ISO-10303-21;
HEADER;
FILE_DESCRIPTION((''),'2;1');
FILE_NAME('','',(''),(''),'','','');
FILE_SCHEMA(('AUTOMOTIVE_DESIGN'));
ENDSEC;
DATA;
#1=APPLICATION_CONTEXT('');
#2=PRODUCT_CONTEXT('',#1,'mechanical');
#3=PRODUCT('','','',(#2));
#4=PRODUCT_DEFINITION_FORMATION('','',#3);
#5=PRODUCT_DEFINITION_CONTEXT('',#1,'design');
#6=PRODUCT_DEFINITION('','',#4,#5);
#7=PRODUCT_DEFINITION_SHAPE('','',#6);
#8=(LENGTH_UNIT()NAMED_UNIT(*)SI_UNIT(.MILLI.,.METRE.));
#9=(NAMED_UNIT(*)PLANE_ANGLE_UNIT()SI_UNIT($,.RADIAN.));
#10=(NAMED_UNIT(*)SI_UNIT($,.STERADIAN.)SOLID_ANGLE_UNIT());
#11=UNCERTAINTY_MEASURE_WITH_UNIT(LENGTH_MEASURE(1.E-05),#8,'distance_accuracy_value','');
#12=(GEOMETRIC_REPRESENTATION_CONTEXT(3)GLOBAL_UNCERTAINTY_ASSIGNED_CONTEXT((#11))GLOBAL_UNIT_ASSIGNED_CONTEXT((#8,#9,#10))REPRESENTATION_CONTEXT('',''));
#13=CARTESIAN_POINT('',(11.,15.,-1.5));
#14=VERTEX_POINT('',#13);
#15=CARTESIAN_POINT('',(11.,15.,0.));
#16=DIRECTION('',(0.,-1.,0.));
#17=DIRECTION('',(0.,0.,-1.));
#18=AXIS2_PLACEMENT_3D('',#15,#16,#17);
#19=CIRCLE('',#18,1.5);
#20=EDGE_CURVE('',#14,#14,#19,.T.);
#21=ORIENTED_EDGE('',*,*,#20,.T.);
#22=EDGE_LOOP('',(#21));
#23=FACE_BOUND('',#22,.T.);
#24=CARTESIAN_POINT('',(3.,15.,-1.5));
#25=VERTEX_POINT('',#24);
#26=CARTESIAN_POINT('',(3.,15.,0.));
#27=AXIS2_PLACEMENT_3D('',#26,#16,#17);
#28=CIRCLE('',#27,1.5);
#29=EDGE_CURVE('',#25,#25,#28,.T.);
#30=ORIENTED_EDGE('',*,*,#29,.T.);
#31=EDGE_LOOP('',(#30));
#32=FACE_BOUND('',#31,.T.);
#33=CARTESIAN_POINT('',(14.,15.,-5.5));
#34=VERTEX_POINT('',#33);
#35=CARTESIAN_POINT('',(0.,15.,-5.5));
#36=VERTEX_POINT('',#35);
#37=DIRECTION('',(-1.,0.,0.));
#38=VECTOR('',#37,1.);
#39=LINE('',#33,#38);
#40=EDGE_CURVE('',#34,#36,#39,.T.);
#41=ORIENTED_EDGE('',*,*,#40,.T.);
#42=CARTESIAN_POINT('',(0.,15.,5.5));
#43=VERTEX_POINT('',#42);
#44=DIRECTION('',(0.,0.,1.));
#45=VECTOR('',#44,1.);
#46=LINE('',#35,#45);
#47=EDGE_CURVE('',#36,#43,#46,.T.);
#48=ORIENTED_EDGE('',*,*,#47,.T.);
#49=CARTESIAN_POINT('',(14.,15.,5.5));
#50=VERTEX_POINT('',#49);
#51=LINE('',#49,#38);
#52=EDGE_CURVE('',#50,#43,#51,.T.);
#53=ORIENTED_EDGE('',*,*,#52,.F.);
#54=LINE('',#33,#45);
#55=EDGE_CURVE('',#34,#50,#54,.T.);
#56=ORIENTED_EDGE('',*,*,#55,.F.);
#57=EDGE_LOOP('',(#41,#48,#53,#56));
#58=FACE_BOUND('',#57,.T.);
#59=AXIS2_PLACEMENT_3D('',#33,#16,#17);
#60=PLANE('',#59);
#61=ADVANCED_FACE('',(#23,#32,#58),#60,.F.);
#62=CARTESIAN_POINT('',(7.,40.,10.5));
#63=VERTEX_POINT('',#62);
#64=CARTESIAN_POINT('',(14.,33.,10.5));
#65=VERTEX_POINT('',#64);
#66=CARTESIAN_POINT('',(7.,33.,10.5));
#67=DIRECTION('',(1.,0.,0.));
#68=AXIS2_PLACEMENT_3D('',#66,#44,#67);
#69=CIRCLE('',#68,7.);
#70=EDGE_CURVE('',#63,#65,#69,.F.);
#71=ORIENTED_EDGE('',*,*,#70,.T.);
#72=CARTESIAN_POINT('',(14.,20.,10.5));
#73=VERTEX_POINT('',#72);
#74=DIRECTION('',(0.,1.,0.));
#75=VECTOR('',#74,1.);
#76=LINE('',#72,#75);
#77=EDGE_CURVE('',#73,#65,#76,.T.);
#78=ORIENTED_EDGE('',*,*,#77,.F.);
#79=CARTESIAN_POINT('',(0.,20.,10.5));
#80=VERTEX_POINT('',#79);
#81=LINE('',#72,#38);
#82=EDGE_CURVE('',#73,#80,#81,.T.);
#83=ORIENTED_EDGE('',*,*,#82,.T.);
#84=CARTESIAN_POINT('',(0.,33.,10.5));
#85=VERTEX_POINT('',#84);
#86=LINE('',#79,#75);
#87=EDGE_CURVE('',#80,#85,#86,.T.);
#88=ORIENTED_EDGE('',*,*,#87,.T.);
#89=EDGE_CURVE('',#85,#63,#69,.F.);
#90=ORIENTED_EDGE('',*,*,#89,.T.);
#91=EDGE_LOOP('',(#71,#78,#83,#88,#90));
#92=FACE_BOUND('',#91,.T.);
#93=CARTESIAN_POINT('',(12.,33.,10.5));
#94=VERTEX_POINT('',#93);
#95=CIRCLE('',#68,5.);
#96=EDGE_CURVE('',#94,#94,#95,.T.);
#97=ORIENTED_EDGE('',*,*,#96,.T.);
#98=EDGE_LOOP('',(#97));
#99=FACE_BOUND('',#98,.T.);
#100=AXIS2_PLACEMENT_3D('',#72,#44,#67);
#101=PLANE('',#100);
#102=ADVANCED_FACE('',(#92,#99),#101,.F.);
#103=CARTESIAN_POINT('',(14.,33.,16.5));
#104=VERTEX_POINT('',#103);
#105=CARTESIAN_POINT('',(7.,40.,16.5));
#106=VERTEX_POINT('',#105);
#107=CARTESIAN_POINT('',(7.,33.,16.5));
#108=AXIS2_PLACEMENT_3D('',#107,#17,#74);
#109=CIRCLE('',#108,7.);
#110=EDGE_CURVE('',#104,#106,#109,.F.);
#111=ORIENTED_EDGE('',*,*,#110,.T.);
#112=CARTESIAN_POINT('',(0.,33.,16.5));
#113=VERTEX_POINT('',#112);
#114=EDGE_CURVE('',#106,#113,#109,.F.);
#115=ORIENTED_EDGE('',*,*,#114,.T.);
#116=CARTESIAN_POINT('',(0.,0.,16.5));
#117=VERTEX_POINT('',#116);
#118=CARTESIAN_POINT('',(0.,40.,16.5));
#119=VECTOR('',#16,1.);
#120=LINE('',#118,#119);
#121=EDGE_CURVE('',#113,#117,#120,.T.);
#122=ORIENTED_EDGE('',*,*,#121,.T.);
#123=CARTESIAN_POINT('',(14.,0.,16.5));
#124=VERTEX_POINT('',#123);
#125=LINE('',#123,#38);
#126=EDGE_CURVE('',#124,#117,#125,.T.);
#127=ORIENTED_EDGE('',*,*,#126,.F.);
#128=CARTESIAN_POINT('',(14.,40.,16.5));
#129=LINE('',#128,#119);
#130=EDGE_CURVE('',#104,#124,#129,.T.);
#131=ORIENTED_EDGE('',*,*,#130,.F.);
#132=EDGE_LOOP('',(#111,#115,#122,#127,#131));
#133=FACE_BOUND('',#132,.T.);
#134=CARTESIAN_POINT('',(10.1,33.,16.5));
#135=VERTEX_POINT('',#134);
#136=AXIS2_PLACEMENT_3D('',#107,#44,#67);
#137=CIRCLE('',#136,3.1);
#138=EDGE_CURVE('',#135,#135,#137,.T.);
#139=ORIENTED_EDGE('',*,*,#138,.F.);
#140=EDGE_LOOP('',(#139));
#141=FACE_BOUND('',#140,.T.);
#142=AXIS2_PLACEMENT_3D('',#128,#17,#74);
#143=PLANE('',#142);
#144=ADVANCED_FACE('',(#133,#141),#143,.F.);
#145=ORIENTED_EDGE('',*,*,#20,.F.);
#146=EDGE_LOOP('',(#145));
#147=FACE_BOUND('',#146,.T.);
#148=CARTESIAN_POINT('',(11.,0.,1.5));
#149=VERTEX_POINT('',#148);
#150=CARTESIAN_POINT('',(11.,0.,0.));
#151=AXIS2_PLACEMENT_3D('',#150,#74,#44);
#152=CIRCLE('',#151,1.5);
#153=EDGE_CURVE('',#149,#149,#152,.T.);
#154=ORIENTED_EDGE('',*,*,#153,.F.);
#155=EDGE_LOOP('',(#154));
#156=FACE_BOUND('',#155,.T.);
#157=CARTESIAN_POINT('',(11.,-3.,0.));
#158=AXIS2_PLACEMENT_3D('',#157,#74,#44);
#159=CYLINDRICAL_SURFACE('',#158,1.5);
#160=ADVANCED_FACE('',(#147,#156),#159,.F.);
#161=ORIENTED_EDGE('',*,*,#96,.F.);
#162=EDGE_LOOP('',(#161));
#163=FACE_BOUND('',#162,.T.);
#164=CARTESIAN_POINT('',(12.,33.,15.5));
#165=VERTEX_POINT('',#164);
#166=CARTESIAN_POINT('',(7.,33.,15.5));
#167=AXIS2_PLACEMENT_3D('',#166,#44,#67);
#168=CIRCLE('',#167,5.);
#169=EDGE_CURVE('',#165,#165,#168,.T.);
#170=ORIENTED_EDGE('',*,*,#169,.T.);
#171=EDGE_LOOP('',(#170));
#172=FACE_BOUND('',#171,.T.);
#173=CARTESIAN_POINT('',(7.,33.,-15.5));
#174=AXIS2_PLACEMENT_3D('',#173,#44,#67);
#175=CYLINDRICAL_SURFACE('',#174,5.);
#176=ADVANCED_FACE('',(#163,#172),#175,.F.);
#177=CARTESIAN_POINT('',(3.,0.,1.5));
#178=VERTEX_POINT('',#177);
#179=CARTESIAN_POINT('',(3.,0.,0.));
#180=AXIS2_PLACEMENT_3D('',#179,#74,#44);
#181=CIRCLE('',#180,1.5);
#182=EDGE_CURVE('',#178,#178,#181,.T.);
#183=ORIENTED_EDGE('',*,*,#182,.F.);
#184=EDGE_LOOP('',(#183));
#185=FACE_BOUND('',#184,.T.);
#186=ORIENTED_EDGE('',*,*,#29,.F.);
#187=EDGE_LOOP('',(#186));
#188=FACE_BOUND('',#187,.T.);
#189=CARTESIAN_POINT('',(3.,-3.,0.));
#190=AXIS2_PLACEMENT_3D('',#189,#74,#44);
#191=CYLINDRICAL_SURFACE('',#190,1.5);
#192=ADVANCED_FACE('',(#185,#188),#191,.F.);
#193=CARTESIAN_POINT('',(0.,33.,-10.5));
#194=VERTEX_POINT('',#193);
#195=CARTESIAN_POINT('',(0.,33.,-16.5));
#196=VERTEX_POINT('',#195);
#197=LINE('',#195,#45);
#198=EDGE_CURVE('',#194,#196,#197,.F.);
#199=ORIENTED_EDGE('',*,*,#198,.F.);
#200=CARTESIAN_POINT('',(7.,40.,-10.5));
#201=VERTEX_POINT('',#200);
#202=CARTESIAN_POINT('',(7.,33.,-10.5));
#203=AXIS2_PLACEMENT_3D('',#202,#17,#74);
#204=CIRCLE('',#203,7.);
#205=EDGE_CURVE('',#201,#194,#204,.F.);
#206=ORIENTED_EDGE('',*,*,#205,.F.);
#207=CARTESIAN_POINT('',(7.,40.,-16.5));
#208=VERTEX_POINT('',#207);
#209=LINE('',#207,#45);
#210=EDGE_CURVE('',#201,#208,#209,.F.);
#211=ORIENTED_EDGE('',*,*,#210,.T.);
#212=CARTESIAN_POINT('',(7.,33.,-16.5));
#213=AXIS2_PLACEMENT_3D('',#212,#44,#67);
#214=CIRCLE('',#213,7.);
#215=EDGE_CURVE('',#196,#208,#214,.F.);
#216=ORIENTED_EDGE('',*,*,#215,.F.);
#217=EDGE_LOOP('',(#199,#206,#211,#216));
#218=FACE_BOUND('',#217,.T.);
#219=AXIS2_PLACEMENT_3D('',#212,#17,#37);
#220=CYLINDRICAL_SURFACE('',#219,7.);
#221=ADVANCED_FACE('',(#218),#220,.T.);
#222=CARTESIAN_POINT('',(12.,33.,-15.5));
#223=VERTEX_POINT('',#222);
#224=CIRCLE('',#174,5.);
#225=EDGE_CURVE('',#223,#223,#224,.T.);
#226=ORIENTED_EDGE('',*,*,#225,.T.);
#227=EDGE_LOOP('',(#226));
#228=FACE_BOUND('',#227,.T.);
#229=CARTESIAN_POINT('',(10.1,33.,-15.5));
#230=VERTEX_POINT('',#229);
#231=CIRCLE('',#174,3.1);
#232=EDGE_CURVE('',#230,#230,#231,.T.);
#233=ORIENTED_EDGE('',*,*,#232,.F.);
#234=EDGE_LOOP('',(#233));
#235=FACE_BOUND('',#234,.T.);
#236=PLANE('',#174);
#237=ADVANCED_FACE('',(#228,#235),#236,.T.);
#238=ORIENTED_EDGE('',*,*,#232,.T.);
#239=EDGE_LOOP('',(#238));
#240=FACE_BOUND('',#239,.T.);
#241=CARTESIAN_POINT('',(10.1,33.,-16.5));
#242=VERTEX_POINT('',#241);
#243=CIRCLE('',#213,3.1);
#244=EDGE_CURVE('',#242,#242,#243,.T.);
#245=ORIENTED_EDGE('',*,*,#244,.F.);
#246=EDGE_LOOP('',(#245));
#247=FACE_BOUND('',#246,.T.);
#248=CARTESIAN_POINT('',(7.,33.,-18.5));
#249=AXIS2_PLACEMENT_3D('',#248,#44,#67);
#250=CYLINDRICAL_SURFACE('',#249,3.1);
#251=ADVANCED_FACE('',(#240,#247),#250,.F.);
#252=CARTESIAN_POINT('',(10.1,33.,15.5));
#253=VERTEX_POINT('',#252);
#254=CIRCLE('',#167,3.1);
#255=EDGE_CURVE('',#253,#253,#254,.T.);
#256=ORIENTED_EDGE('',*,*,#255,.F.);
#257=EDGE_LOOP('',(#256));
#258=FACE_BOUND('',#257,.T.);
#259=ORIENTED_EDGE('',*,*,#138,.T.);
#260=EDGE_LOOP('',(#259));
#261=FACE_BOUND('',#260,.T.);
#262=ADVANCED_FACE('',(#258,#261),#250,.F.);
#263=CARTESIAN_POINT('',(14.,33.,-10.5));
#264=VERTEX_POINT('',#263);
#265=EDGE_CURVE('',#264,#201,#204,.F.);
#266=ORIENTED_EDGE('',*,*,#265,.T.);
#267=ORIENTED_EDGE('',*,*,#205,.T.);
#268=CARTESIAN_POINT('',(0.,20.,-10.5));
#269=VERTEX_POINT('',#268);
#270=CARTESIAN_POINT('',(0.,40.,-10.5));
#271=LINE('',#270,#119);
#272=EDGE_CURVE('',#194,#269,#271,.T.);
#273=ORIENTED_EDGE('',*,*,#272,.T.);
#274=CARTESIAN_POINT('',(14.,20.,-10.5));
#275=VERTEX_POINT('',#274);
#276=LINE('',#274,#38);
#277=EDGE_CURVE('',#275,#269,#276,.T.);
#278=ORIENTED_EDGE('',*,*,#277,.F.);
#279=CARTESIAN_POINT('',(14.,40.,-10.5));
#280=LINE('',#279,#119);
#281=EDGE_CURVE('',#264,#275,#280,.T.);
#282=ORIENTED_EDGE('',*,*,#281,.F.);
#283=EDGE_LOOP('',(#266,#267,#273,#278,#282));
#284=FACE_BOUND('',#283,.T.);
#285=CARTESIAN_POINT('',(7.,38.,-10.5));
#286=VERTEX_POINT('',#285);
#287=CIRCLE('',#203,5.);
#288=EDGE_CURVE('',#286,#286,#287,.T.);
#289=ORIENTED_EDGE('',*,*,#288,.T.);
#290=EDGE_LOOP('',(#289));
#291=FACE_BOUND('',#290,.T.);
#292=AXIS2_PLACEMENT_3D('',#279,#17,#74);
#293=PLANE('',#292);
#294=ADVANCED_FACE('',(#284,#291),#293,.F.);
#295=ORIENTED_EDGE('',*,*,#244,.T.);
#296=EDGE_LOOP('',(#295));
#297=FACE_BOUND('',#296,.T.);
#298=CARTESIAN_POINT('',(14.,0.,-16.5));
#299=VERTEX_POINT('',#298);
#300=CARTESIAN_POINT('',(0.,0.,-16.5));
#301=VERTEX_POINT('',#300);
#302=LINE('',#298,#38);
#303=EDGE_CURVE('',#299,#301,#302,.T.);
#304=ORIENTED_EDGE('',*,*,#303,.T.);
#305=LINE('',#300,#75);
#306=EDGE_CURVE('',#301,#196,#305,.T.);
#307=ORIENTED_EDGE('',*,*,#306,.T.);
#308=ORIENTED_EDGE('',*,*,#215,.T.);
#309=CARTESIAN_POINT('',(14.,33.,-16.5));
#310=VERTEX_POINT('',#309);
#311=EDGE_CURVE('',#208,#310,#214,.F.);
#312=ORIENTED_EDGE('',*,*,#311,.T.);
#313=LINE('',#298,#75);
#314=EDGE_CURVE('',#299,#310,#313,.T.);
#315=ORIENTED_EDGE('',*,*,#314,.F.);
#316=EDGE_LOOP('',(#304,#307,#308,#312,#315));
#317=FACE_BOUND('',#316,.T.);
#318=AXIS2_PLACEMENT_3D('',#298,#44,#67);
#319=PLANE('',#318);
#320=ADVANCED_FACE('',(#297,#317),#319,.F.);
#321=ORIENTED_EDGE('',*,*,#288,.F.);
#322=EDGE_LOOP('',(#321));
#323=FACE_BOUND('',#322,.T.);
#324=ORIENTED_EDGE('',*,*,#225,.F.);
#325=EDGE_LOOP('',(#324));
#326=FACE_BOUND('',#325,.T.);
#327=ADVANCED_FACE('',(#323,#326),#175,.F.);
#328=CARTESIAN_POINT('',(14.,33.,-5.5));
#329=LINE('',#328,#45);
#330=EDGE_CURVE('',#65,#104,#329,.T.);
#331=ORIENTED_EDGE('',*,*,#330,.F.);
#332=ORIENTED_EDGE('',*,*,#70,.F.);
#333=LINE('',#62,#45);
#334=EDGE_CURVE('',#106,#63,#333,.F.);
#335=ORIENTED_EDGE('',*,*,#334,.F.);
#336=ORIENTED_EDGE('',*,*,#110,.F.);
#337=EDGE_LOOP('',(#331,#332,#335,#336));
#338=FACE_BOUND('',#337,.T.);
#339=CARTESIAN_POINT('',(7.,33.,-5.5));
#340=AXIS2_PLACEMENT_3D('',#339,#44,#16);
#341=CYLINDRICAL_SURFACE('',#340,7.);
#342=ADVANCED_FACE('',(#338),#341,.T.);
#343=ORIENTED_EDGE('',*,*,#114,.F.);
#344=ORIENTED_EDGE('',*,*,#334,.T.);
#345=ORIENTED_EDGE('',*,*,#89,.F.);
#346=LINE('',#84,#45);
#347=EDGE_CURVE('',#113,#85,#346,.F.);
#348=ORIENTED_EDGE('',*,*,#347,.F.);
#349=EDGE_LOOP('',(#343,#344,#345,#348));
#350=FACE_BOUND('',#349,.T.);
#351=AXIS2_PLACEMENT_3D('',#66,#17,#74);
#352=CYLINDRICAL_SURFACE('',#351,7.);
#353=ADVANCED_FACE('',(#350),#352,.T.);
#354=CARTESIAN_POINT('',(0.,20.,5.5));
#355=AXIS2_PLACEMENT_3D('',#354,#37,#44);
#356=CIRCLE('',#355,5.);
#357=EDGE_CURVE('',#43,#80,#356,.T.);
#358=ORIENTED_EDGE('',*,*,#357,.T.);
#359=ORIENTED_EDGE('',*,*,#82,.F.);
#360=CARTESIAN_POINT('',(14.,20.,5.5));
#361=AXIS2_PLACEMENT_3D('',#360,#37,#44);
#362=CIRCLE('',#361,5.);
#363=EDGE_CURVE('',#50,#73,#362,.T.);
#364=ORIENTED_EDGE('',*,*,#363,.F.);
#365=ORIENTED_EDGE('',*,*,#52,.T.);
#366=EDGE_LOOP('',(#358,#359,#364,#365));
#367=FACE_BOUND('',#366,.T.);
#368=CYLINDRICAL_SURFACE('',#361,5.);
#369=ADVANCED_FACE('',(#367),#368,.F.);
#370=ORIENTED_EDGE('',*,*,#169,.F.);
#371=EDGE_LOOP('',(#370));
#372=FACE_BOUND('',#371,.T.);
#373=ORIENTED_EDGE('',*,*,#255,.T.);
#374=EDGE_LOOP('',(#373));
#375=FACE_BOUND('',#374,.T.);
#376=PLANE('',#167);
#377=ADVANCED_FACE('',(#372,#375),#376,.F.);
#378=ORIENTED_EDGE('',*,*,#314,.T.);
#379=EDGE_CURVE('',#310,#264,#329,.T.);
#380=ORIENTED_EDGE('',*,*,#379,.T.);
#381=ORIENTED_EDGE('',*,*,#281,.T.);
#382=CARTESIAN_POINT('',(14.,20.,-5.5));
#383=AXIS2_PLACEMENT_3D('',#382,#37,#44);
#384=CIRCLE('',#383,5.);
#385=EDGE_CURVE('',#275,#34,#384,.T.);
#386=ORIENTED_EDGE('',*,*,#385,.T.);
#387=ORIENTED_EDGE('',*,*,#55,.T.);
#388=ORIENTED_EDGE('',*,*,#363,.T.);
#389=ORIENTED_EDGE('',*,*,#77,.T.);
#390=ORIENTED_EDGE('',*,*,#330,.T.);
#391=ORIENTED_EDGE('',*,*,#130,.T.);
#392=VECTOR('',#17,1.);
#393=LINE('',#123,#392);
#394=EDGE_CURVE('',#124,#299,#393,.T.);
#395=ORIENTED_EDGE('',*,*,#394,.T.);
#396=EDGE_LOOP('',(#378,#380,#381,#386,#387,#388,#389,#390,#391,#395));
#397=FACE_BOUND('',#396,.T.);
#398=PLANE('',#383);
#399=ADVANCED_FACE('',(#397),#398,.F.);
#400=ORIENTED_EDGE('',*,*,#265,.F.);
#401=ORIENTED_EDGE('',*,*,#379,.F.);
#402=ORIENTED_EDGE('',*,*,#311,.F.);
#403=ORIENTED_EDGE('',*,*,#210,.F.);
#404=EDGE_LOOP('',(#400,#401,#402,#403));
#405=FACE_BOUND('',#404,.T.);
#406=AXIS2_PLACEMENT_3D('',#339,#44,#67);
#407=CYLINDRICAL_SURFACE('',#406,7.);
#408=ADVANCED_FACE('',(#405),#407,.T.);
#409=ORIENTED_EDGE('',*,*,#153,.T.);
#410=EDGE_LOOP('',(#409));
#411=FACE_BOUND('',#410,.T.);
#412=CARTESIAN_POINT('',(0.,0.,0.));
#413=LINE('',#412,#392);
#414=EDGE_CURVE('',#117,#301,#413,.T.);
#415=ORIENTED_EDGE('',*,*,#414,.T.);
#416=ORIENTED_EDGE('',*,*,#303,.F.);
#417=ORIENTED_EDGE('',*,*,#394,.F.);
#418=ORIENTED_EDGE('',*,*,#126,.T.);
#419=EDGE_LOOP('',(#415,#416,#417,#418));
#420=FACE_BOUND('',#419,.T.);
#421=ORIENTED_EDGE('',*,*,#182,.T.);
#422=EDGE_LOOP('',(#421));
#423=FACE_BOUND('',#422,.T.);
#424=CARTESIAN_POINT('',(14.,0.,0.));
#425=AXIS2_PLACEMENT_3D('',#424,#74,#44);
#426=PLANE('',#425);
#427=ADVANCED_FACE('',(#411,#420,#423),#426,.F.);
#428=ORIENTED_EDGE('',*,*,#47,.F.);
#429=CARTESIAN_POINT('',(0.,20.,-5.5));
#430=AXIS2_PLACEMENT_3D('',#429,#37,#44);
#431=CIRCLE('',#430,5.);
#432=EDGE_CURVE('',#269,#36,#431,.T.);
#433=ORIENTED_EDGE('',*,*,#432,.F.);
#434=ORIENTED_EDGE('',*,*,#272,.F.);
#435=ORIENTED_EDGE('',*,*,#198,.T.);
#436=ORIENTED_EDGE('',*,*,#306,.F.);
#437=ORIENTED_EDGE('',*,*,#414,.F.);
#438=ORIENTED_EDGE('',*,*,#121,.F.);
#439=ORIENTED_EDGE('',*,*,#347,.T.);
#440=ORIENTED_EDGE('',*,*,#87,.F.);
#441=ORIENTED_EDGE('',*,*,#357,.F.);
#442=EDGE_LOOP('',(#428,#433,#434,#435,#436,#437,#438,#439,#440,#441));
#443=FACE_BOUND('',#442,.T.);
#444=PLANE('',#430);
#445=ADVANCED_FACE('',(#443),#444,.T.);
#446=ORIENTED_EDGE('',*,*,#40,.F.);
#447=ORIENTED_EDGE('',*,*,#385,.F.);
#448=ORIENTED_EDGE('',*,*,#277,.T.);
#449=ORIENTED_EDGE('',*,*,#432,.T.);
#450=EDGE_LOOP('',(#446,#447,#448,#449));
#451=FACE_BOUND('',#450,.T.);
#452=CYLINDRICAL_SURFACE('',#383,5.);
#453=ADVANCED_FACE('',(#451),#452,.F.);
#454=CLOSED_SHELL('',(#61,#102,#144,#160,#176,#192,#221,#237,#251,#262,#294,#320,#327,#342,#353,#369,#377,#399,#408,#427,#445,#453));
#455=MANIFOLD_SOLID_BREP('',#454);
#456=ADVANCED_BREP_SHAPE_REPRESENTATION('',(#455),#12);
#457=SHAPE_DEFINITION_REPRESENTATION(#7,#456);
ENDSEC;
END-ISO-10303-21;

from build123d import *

# Parameters (mm, degrees)
EXTRUDE_1_DEPTH     = 14
FILLET_1_R          = 7
CUT_EXTRUDE_START   = -1
SKETCH_7_R          = 5
CUT_EXTRUDE_1_DEPTH = 31
SKETCH_8_R          = 3.1
CUT_EXTRUDE_2_DEPTH = 35
CUT_EXTRUDE_START_2 = 2
SKETCH_10_R         = 1.5
CUT_EXTRUDE_3_DEPTH = 20


with BuildPart() as part:
    # 草图4 → 凸台-拉伸1 (new body)
    with BuildSketch(Plane(origin=(0, 0, 0), x_dir=(0, 0, -1), z_dir=(1, 0, 0))):
        with BuildLine():
            Line((0, 0), (16.5, 0))
            Line((16.5, 0), (16.5, 40))
            Line((16.5, 40), (10.5, 40))
            Line((10.5, 40), (10.5, 20))
            ThreePointArc((10.5, 20), (9.035533906, 16.464466094), (5.5, 15))
            Line((5.5, 15), (-5.5, 15))
            ThreePointArc((-5.5, 15), (-9.035533906, 16.464466094), (-10.5, 20))
            Line((-10.5, 20), (-10.5, 40))
            Line((-10.5, 40), (-16.5, 40))
            Line((-16.5, 40), (-16.5, 0))
            Line((-16.5, 0), (0, 0))
        make_face()
    extrude(amount=EXTRUDE_1_DEPTH)

    # 圆角1
    fillet_1_edges = [part.edges().sort_by_distance(p)[0] for p in [
        (0, 40, 13.5),
        (0, 40, -13.5),
        (14, 40, -13.5),
        (14, 40, 13.5),
    ]]
    fillet(fillet_1_edges, radius=FILLET_1_R - 0.0001)  # a hair under: the kernel refuses the full size

    # 草图7 → 切除-拉伸1 (cut)
    with BuildSketch(Plane.XY.offset(16.5).offset(CUT_EXTRUDE_START)):
        with Locations((7, 33)):
            Circle(SKETCH_7_R)
    extrude(amount=-CUT_EXTRUDE_1_DEPTH, mode=Mode.SUBTRACT)

    # 草图8 → 切除-拉伸2 (cut)
    with BuildSketch(Plane.XY.offset(16.5)):
        with Locations((7, 33)):
            Circle(SKETCH_8_R)
    extrude(amount=-CUT_EXTRUDE_2_DEPTH, mode=Mode.SUBTRACT)

    # 草图10 → 切除-拉伸3 (cut)
    with BuildSketch(Plane(origin=(0, 15, 0), x_dir=(1, 0, 0), z_dir=(0, 1, 0)).offset(CUT_EXTRUDE_START_2)):
        with Locations(Location((3, 0, 0), (0, 0, 270))):
            Circle(SKETCH_10_R)
        with Locations(Location((11, 0, 0), (0, 0, 270))):
            Circle(SKETCH_10_R)
    extrude(amount=-CUT_EXTRUDE_3_DEPTH, mode=Mode.SUBTRACT)


solid = part.part
